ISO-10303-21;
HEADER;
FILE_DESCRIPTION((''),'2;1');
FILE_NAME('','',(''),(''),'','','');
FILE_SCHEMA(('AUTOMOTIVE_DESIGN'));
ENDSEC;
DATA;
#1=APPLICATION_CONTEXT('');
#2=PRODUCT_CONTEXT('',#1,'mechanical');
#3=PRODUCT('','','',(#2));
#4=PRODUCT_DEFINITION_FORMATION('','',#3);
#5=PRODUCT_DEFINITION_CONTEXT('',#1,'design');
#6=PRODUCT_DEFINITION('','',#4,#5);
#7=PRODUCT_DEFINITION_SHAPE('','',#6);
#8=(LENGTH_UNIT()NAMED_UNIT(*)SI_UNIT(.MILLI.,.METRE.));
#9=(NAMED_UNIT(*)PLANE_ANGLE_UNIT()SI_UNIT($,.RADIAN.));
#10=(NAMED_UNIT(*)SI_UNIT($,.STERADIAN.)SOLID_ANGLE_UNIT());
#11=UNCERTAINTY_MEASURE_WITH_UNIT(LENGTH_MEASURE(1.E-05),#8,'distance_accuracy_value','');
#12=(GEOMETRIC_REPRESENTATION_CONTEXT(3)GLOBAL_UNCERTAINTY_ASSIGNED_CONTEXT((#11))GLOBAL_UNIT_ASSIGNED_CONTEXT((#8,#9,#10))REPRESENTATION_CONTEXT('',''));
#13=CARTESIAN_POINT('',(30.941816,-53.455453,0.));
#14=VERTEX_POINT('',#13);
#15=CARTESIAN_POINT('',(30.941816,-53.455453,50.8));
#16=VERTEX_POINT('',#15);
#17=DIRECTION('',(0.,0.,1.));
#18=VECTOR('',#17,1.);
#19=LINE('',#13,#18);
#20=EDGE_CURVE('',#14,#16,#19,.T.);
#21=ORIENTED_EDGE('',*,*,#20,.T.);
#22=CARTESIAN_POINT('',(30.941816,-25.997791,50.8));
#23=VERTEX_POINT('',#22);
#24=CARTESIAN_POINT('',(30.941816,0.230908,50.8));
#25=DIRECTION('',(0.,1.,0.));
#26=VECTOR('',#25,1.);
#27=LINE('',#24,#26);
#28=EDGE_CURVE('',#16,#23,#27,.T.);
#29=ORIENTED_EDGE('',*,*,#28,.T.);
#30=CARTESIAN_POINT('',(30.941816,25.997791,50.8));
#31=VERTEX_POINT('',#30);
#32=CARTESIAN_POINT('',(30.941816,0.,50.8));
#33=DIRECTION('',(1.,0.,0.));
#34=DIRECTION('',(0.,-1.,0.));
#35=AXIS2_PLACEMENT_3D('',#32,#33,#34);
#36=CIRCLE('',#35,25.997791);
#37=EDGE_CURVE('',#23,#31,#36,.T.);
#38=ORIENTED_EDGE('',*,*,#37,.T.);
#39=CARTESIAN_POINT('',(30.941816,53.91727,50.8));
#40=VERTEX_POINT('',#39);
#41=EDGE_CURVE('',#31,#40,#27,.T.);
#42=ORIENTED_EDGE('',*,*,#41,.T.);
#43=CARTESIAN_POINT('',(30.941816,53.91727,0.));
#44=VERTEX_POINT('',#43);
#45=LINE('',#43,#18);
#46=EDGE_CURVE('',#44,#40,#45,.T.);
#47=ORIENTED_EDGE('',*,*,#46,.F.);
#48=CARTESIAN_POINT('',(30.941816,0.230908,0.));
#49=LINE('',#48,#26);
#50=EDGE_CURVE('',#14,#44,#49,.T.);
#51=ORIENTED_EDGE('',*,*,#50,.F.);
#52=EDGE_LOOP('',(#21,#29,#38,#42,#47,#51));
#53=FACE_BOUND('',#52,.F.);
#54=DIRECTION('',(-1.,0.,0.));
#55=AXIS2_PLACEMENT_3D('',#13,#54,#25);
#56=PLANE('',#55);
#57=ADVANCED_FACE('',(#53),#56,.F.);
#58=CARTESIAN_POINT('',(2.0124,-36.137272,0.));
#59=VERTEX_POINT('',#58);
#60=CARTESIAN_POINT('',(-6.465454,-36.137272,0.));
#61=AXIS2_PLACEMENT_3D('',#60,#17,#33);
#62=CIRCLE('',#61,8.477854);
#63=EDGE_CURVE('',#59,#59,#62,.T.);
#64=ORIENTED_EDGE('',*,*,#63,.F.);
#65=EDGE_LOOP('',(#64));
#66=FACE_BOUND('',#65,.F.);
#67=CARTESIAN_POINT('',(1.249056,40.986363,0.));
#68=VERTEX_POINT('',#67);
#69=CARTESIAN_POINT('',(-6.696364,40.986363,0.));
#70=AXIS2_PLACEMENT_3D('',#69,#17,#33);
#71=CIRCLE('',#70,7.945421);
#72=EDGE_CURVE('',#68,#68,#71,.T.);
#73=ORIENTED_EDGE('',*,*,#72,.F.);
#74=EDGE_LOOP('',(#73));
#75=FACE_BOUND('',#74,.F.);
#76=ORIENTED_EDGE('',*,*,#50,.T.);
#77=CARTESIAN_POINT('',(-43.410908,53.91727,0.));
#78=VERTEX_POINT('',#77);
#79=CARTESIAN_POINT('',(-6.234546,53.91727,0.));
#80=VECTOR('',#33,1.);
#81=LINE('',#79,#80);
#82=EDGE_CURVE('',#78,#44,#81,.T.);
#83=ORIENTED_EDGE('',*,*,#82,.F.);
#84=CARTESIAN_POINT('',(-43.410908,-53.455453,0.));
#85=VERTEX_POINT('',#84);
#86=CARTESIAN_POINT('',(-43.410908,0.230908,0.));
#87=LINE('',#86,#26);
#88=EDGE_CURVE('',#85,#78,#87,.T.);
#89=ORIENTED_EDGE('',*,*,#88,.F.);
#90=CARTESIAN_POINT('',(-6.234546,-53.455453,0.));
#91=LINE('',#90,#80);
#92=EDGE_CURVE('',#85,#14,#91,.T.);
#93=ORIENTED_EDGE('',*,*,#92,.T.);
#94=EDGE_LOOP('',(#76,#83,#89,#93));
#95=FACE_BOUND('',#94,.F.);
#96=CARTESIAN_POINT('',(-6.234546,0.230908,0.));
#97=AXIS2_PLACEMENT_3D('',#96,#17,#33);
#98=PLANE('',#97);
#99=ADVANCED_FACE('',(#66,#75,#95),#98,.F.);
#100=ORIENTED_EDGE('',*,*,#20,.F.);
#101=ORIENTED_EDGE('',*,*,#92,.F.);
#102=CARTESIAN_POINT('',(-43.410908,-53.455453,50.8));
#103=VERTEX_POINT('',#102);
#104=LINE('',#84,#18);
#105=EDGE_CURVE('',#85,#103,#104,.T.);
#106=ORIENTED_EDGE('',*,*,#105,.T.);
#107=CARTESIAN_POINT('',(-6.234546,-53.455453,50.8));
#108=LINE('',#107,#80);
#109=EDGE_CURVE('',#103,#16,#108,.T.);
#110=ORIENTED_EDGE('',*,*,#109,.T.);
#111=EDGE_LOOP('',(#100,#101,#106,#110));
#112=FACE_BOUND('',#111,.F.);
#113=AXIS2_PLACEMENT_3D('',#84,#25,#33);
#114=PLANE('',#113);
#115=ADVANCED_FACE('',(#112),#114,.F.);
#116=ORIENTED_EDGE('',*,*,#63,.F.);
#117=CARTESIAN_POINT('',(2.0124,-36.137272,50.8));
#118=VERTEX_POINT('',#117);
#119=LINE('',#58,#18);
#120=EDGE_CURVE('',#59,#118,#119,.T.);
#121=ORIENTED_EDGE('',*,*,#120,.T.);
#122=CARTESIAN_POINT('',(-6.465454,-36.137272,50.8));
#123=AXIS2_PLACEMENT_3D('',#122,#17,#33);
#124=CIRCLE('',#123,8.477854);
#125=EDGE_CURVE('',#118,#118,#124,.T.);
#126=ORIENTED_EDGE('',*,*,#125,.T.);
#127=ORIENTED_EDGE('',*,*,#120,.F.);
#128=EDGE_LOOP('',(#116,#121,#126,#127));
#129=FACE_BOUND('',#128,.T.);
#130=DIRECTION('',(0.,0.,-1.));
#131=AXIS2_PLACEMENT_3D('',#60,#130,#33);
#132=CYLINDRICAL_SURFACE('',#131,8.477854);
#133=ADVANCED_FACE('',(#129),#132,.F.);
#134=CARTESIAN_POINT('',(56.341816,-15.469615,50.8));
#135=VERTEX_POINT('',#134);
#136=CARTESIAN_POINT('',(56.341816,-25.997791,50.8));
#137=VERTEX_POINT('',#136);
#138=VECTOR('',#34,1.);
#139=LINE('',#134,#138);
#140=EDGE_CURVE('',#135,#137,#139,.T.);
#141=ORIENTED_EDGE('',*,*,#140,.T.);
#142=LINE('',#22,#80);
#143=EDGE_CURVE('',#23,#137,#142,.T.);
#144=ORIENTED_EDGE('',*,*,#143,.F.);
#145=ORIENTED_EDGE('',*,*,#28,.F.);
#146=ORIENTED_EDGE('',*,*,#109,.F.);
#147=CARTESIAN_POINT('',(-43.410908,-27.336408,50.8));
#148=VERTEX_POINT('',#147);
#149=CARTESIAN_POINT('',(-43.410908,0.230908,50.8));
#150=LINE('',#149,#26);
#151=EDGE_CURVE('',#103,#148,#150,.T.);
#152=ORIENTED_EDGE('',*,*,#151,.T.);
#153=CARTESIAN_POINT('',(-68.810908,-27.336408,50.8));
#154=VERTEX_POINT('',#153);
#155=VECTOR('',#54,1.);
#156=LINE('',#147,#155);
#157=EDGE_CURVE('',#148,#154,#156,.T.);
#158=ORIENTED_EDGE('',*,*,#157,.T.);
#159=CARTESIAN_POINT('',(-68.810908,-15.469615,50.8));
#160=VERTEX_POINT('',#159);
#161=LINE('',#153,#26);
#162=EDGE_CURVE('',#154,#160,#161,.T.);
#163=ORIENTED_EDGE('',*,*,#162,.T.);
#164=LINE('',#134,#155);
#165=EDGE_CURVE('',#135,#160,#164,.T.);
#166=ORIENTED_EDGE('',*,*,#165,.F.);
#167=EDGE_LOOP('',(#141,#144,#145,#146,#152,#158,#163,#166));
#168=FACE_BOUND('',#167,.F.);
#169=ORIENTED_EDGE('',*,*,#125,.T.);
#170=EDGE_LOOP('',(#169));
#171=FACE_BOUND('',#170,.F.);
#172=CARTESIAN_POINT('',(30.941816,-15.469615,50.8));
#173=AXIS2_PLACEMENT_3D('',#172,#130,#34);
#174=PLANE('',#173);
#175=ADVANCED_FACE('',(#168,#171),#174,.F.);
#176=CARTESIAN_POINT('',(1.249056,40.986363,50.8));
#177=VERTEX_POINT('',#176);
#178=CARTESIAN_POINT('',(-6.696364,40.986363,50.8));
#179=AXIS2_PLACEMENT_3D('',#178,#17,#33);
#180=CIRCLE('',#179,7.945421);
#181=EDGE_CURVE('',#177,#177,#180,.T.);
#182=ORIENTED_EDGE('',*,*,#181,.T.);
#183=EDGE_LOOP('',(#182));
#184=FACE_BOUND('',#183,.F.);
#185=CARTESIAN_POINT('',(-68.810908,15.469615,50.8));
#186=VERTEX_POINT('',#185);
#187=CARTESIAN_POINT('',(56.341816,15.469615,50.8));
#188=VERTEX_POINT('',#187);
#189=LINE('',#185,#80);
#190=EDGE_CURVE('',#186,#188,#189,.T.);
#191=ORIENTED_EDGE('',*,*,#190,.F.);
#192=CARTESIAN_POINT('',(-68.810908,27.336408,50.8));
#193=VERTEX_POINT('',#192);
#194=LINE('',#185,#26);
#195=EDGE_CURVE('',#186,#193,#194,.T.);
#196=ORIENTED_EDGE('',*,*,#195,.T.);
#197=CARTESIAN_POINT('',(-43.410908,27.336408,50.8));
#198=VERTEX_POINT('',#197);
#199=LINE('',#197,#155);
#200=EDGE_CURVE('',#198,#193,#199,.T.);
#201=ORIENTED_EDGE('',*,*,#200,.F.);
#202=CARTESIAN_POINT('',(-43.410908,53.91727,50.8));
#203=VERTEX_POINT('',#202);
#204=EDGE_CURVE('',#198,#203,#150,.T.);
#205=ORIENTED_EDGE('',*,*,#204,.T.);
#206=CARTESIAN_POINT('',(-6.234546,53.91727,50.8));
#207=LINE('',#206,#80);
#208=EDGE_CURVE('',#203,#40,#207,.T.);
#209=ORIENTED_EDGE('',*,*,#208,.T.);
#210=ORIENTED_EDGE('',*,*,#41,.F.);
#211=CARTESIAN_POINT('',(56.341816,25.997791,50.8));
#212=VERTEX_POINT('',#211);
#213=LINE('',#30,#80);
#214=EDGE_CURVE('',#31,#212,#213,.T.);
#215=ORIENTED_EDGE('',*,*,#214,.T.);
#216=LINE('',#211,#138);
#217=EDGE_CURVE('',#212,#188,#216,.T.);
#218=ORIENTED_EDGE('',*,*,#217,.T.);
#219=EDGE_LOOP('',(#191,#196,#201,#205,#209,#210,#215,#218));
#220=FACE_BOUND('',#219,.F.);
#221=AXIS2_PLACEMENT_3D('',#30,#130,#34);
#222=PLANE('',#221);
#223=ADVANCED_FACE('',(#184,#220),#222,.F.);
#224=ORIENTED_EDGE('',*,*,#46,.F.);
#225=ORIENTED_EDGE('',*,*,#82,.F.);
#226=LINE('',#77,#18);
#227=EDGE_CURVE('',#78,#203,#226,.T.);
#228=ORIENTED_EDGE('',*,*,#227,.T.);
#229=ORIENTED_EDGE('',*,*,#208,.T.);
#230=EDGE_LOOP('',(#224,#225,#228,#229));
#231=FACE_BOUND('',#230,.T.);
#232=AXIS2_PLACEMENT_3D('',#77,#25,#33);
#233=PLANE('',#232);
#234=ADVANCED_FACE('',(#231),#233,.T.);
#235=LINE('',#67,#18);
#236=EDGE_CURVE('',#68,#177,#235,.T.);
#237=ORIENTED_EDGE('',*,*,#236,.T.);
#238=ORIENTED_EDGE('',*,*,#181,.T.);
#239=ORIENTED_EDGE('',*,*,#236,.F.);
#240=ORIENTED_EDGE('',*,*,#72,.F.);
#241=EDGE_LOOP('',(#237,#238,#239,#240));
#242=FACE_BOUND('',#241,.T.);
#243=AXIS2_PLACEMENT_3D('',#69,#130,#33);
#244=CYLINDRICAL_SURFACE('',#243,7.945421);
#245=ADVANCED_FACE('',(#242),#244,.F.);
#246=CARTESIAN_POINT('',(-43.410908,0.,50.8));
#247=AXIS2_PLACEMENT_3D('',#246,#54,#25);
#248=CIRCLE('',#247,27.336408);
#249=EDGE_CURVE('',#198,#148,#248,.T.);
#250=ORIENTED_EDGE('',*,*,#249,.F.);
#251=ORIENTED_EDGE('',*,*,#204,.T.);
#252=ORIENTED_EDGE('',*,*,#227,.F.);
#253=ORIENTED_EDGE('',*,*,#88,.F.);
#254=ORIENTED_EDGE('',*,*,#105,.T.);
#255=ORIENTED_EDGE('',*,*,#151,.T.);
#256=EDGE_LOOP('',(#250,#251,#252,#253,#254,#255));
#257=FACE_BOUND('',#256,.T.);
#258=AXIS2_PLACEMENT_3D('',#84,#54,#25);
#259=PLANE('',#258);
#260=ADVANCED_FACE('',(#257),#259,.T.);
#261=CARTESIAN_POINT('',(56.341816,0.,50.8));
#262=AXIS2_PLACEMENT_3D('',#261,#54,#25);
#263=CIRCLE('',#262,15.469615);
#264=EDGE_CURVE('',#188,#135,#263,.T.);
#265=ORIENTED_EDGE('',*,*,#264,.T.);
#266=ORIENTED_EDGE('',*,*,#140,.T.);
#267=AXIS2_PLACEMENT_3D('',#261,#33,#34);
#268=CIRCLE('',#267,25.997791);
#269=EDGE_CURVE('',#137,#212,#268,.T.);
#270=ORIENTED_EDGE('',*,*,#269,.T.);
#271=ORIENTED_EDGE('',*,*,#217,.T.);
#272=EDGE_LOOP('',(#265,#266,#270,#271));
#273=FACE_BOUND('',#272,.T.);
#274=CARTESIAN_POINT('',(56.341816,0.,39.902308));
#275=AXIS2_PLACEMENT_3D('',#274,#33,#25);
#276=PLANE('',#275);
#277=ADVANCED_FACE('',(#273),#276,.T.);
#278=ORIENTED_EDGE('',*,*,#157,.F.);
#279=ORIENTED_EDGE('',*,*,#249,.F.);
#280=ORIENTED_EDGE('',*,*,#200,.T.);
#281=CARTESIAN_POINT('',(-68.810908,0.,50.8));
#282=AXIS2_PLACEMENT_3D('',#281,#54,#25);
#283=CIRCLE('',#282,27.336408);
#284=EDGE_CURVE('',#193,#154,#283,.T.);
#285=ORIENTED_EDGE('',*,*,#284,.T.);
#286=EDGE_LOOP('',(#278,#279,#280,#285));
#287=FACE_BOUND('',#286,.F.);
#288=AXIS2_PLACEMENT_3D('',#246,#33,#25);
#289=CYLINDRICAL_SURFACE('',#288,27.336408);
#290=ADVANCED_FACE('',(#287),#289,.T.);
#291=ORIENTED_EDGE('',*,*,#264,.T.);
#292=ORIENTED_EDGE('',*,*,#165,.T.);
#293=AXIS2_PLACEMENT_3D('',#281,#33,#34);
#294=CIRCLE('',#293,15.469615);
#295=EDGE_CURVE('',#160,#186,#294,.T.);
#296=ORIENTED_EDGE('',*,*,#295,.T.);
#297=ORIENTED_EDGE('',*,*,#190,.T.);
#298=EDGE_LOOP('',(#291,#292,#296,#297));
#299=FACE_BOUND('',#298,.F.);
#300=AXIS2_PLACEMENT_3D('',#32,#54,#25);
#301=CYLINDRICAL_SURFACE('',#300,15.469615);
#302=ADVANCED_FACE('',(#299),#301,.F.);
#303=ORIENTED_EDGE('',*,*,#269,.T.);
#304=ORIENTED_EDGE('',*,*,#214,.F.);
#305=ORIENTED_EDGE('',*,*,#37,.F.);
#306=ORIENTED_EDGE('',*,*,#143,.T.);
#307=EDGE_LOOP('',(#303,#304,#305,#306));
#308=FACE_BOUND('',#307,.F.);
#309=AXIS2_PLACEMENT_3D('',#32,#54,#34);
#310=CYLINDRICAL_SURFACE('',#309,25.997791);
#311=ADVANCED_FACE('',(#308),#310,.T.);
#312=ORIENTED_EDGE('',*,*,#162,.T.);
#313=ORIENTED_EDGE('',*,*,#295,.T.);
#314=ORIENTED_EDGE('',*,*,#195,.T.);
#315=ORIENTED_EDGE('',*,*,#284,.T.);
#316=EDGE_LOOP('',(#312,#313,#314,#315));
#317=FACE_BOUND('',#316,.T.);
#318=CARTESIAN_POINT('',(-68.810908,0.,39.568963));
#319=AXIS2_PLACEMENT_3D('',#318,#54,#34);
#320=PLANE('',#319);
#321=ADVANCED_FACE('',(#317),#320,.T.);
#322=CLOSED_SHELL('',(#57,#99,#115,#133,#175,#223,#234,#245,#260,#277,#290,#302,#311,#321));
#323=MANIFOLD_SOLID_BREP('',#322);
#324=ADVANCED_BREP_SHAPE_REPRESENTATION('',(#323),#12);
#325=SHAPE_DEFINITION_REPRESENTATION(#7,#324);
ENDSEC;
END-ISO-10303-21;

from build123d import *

# Parameters (mm, degrees)
F0_W     = 74.3527244776
F0_H     = 107.3727235198
F0_R     = 8.4778544631
F0_R_2   = 7.9454205322
F1_DEPTH = 50.8
F3_DEPTH = 25.4
F4_DEPTH = 76.2
F6_DEPTH = 25.4


with BuildPart() as f1:
    # F0 (on Top) → F1 (new body)
    with BuildSketch(Plane.XY):
        with Locations((-6.234546192, 0.2309083939)):
            Rectangle(F0_W, F0_H)
        with Locations((-6.4654541202, -36.1372716725)):
            Circle(F0_R, mode=Mode.SUBTRACT)
        with Locations((-6.6963643767, 40.9863628447)):
            Circle(F0_R_2, mode=Mode.SUBTRACT)
    extrude(amount=F1_DEPTH)

    # F2 (on face) → F3 (join)
    with BuildSketch(Plane(origin=(-43.4109084308, 0, 0), x_dir=(0, -1, 0), z_dir=(-1, 0, 0))):
        with BuildLine():
            ThreePointArc((-27.3364075131, 50.8), (0, 23.4635924869), (27.3364075131, 50.8))
            Line((27.3364075131, 50.8), (15.4696153843, 50.8))
            ThreePointArc((15.4696153843, 50.8), (0, 35.3303846157), (-15.4696153843, 50.8))
            Line((-15.4696153843, 50.8), (-27.3364075131, 50.8))
        make_face()
    extrude(amount=F3_DEPTH)

    # F4 (cut): a face of the model
    f4_faces = [f1.faces().sort_by_distance(p)[0] for p in [
        (-43.4109084308, 0, 44.234491317),
    ]]
    extrude(f4_faces, amount=-F4_DEPTH, mode=Mode.SUBTRACT)

    # F5 (on face) → F6 (join)
    with BuildSketch(Plane.YZ.offset(30.9418160468)):
        with BuildLine():
            ThreePointArc((-25.9977905066, 50.8), (0, 24.8022094934), (25.9977905066, 50.8))
            Line((25.9977905066, 50.8), (15.4696153843, 50.8))
            ThreePointArc((15.4696153843, 50.8), (0, 35.3303846157), (-15.4696153843, 50.8))
            Line((-15.4696153843, 50.8), (-25.9977905066, 50.8))
        make_face()
    extrude(amount=F6_DEPTH)


solid = f1.part
